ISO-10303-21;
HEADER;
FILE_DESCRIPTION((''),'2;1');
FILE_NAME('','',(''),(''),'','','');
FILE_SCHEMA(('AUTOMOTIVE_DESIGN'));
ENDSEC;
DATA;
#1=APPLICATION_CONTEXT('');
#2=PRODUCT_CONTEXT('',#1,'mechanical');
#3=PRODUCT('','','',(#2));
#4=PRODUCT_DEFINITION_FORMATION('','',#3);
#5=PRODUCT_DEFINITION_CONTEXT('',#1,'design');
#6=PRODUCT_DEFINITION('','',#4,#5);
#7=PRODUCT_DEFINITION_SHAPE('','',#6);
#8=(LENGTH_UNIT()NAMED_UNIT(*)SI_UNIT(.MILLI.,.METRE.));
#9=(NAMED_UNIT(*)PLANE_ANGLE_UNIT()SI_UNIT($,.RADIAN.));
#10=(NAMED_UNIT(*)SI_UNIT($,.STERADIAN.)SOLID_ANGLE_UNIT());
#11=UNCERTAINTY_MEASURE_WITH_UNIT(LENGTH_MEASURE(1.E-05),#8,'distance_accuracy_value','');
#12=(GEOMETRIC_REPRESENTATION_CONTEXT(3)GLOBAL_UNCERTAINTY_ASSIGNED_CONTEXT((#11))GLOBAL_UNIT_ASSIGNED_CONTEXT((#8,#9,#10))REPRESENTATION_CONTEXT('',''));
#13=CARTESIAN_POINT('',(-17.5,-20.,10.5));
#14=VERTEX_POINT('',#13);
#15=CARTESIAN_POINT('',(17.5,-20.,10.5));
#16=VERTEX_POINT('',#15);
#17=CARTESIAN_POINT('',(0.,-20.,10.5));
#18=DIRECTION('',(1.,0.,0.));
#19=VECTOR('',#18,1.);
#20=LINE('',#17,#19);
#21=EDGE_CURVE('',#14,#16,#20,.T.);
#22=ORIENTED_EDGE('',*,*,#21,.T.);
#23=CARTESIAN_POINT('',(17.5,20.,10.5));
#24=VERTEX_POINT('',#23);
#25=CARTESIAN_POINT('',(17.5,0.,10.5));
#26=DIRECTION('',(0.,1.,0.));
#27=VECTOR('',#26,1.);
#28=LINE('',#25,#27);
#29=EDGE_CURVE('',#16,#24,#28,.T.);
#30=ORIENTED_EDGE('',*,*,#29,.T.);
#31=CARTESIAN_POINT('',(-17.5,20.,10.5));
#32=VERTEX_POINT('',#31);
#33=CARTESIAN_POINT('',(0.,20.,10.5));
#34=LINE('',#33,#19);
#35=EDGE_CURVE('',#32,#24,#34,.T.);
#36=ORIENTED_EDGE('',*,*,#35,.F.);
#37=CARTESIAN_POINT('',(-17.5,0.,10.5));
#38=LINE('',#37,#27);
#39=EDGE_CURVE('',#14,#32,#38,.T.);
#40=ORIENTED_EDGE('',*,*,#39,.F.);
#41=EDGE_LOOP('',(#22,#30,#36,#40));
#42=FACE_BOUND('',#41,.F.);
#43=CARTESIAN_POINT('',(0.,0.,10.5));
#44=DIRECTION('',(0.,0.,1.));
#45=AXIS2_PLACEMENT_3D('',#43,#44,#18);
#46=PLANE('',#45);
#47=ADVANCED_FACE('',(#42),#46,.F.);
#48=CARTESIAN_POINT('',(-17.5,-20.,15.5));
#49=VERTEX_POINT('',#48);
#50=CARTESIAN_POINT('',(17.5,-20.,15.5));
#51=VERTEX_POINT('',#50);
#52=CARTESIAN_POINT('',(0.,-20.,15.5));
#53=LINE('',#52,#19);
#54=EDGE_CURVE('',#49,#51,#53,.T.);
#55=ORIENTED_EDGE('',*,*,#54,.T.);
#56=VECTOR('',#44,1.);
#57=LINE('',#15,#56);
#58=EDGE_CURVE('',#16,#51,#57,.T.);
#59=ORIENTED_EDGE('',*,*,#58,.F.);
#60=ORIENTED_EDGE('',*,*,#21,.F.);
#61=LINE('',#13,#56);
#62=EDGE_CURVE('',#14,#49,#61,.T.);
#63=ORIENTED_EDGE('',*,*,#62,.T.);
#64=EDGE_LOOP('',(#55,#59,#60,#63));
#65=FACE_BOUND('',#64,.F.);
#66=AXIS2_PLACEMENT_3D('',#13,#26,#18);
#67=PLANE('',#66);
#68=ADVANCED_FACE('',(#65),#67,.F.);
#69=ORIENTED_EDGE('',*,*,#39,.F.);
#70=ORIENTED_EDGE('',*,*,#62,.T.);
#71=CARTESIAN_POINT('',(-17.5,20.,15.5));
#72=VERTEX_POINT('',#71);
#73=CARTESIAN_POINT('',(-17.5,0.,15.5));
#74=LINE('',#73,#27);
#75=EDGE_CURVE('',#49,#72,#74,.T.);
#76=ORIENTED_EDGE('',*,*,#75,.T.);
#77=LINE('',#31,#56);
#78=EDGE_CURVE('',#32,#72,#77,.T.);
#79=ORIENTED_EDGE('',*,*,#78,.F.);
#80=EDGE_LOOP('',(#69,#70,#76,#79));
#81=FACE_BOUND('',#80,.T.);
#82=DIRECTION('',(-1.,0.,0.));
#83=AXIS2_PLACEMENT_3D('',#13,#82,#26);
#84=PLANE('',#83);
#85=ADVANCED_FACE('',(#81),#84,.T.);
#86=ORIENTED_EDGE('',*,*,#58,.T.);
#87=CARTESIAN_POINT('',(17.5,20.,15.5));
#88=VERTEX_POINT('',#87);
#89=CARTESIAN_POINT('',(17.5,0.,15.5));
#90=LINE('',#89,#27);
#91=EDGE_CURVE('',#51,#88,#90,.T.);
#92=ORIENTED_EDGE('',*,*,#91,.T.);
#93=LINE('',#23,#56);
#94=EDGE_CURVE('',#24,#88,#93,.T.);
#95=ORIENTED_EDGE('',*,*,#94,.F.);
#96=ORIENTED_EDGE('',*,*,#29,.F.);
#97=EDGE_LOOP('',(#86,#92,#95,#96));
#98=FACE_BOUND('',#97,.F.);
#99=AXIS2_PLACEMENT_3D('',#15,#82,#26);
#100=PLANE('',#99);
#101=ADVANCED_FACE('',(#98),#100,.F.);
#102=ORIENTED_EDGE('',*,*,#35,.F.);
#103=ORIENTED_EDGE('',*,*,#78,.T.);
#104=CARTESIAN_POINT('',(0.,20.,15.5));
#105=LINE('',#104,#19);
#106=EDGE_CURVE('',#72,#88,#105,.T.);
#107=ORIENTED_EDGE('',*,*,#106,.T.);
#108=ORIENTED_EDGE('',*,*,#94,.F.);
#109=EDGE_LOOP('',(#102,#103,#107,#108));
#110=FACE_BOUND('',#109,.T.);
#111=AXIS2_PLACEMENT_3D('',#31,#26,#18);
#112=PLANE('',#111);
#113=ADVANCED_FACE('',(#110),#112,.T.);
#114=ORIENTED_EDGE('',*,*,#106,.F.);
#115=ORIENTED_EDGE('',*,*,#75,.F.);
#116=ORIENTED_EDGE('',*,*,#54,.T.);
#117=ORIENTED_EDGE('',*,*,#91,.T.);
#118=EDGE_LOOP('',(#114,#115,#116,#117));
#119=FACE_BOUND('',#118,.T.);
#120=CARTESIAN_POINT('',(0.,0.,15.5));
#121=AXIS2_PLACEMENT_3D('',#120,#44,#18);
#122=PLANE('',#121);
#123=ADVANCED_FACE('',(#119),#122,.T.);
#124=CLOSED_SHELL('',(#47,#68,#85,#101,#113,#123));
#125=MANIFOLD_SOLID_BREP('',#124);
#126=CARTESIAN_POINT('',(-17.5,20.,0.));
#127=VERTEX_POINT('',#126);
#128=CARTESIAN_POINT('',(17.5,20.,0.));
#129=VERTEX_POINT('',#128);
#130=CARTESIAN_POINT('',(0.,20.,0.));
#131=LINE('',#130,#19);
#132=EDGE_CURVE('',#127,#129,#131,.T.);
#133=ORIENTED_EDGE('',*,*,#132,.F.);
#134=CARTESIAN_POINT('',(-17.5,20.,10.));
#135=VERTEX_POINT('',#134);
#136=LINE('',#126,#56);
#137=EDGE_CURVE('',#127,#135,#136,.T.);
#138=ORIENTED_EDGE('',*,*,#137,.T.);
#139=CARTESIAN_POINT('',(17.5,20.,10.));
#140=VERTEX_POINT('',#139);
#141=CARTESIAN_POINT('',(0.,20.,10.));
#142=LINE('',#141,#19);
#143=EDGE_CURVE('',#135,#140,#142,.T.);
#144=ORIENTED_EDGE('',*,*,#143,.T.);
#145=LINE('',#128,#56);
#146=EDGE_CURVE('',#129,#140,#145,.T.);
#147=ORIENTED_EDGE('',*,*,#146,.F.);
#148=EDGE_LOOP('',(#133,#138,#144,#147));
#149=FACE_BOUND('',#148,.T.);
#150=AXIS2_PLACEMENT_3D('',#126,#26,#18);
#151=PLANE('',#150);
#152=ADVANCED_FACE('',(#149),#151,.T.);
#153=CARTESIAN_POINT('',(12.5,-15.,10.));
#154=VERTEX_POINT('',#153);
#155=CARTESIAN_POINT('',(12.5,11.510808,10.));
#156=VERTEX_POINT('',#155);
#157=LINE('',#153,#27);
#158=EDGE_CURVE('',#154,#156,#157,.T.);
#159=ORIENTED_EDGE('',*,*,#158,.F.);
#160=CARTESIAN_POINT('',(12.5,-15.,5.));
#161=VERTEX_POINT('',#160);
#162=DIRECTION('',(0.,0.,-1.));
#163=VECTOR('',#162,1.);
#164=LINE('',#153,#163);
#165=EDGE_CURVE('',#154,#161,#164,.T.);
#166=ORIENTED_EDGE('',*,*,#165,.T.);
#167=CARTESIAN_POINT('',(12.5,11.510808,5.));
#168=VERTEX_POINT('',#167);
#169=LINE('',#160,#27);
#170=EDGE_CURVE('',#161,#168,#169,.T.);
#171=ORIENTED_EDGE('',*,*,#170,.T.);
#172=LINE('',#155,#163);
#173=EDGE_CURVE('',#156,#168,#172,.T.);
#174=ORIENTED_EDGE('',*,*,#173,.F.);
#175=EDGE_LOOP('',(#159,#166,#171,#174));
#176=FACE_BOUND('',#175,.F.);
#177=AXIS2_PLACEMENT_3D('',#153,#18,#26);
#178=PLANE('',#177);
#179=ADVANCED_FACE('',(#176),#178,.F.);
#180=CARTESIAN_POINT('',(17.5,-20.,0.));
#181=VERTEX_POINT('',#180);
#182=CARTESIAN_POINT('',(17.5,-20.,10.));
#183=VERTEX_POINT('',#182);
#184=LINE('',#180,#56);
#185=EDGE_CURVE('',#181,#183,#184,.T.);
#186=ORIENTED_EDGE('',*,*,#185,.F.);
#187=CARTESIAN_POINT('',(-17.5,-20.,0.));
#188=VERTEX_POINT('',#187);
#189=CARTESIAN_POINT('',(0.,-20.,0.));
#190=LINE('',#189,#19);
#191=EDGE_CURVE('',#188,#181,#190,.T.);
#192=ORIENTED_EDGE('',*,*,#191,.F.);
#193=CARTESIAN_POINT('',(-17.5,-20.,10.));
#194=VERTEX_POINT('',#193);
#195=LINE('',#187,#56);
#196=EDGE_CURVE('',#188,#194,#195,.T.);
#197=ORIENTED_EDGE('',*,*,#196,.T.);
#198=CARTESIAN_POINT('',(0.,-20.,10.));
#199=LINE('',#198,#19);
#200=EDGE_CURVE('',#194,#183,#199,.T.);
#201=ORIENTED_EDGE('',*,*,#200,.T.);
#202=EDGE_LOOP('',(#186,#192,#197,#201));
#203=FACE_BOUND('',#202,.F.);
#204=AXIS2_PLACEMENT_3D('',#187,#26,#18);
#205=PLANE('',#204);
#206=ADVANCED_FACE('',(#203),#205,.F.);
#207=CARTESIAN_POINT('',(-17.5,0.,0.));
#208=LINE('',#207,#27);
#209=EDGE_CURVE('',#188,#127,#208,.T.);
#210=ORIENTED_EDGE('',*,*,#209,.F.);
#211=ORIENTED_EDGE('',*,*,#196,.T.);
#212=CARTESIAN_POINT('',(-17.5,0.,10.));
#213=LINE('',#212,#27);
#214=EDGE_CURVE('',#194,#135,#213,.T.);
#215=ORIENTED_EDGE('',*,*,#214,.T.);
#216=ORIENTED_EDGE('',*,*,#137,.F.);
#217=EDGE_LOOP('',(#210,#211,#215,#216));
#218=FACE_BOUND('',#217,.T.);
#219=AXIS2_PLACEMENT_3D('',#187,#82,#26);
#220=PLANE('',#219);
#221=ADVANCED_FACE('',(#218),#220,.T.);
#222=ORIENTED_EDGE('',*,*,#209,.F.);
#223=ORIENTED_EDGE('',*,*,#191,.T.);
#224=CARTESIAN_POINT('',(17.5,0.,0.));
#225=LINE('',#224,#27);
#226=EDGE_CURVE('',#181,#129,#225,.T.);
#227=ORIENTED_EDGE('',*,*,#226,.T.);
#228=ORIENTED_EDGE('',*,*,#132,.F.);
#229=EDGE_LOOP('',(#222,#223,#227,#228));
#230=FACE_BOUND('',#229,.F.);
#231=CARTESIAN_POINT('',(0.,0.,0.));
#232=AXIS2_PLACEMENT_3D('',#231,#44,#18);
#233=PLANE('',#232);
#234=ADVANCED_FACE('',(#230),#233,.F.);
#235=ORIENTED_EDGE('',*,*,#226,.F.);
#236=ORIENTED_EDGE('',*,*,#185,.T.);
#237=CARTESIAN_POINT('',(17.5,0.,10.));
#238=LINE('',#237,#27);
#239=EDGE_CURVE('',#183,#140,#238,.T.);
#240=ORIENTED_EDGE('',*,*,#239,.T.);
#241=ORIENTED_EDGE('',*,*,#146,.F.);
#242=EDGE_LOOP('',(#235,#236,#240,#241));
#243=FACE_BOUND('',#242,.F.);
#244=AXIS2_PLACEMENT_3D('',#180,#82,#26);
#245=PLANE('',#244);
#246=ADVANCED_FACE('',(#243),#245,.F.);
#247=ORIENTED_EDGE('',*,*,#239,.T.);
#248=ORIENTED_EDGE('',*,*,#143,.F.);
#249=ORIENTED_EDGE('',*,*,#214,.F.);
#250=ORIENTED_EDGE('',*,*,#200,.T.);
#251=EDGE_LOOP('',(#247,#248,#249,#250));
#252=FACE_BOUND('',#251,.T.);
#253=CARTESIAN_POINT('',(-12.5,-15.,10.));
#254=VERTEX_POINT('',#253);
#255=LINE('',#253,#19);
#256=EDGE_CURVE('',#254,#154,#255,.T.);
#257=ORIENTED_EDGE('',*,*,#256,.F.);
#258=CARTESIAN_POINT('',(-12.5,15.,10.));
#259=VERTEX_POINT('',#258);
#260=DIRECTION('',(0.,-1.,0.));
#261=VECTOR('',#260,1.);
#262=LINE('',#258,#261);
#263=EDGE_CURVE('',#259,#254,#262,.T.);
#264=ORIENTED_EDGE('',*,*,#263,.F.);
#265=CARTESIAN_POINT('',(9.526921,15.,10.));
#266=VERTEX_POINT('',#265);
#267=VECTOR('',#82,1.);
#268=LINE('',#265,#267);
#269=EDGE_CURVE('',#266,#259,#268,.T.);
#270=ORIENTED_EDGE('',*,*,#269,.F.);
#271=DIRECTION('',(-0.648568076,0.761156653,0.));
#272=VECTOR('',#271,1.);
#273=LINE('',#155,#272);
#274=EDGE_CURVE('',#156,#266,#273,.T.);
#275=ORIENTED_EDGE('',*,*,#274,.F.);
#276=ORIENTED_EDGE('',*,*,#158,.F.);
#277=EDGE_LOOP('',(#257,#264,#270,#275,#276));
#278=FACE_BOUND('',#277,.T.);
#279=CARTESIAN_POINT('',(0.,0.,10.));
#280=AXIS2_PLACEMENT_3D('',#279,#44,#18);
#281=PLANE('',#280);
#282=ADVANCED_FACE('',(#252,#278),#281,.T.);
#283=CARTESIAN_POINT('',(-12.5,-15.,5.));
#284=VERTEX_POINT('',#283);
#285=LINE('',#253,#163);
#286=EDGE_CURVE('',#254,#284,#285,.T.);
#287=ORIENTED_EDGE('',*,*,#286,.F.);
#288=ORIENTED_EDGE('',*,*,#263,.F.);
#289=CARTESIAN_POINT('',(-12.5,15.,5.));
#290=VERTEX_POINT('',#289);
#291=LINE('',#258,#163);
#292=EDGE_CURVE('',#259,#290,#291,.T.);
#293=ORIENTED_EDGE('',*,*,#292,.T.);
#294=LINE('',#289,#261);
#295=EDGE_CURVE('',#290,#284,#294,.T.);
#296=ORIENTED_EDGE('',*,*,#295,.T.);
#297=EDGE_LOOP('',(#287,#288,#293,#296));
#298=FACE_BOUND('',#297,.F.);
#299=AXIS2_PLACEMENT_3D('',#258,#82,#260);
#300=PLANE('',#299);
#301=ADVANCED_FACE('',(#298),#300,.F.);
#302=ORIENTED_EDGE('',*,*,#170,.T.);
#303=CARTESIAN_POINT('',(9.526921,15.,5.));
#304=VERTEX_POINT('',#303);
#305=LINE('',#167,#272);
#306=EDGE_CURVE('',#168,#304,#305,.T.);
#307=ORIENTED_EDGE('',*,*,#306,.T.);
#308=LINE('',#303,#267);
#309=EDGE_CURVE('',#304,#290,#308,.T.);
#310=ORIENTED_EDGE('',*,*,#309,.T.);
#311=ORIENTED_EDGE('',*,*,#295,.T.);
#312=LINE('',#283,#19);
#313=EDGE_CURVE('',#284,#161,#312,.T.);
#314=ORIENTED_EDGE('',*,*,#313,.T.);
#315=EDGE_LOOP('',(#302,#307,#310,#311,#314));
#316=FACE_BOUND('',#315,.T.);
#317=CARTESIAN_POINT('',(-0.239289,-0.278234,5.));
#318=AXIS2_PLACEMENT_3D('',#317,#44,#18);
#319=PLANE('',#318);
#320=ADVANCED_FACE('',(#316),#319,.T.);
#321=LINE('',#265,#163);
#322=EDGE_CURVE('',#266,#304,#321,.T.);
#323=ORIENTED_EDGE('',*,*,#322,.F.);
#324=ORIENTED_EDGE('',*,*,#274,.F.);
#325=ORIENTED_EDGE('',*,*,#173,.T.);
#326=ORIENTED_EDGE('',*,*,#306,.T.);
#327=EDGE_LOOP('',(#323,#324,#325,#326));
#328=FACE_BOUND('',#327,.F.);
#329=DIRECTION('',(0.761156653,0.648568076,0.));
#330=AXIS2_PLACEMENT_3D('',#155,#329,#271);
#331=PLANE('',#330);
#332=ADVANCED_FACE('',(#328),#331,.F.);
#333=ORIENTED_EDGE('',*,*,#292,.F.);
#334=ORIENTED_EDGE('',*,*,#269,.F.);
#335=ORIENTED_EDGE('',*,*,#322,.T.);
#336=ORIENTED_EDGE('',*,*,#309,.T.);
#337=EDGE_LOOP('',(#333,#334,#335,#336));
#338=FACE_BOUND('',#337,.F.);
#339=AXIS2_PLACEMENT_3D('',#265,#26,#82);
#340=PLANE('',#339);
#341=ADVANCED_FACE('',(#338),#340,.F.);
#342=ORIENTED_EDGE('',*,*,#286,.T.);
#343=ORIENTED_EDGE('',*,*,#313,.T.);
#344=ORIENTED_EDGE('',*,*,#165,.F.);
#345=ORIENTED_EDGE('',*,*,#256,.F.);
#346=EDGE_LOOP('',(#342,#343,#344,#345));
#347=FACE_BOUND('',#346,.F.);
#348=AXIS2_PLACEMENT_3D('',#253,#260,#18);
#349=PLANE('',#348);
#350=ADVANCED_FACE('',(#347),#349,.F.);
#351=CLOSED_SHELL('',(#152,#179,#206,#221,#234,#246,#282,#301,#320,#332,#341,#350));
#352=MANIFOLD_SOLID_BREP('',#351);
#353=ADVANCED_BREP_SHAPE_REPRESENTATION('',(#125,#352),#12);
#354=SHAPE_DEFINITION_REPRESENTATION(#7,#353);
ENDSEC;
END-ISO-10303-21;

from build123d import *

# Parameters (mm, degrees)
F0_W     = 35
F0_H     = 40
F1_DEPTH = 10
F3_DEPTH = 5
F5_W     = 35
F5_H     = 40
F6_DEPTH = 5


with BuildPart() as f1:
    # F0 (on Top) → F1 (new body)
    with BuildSketch(Plane.XY):
        Rectangle(F0_W, F0_H)
    extrude(amount=F1_DEPTH)

    # F2 (on face) → F3 (cut)
    with BuildSketch(Plane.XY.offset(10)):
        Polygon((-12.5, -15), (12.5, -15), (12.5, 11.5108080208), (9.5269214362, 15), (-12.5, 15), align=None)
    extrude(amount=-F3_DEPTH, mode=Mode.SUBTRACT)


with BuildPart() as f6:
    # F5 (on offset) → F6 (new body)
    with BuildSketch(Plane.XY.offset(10.5)):
        Rectangle(F5_W, F5_H)
    extrude(amount=F6_DEPTH)


solid = Compound([f1.part, f6.part])
